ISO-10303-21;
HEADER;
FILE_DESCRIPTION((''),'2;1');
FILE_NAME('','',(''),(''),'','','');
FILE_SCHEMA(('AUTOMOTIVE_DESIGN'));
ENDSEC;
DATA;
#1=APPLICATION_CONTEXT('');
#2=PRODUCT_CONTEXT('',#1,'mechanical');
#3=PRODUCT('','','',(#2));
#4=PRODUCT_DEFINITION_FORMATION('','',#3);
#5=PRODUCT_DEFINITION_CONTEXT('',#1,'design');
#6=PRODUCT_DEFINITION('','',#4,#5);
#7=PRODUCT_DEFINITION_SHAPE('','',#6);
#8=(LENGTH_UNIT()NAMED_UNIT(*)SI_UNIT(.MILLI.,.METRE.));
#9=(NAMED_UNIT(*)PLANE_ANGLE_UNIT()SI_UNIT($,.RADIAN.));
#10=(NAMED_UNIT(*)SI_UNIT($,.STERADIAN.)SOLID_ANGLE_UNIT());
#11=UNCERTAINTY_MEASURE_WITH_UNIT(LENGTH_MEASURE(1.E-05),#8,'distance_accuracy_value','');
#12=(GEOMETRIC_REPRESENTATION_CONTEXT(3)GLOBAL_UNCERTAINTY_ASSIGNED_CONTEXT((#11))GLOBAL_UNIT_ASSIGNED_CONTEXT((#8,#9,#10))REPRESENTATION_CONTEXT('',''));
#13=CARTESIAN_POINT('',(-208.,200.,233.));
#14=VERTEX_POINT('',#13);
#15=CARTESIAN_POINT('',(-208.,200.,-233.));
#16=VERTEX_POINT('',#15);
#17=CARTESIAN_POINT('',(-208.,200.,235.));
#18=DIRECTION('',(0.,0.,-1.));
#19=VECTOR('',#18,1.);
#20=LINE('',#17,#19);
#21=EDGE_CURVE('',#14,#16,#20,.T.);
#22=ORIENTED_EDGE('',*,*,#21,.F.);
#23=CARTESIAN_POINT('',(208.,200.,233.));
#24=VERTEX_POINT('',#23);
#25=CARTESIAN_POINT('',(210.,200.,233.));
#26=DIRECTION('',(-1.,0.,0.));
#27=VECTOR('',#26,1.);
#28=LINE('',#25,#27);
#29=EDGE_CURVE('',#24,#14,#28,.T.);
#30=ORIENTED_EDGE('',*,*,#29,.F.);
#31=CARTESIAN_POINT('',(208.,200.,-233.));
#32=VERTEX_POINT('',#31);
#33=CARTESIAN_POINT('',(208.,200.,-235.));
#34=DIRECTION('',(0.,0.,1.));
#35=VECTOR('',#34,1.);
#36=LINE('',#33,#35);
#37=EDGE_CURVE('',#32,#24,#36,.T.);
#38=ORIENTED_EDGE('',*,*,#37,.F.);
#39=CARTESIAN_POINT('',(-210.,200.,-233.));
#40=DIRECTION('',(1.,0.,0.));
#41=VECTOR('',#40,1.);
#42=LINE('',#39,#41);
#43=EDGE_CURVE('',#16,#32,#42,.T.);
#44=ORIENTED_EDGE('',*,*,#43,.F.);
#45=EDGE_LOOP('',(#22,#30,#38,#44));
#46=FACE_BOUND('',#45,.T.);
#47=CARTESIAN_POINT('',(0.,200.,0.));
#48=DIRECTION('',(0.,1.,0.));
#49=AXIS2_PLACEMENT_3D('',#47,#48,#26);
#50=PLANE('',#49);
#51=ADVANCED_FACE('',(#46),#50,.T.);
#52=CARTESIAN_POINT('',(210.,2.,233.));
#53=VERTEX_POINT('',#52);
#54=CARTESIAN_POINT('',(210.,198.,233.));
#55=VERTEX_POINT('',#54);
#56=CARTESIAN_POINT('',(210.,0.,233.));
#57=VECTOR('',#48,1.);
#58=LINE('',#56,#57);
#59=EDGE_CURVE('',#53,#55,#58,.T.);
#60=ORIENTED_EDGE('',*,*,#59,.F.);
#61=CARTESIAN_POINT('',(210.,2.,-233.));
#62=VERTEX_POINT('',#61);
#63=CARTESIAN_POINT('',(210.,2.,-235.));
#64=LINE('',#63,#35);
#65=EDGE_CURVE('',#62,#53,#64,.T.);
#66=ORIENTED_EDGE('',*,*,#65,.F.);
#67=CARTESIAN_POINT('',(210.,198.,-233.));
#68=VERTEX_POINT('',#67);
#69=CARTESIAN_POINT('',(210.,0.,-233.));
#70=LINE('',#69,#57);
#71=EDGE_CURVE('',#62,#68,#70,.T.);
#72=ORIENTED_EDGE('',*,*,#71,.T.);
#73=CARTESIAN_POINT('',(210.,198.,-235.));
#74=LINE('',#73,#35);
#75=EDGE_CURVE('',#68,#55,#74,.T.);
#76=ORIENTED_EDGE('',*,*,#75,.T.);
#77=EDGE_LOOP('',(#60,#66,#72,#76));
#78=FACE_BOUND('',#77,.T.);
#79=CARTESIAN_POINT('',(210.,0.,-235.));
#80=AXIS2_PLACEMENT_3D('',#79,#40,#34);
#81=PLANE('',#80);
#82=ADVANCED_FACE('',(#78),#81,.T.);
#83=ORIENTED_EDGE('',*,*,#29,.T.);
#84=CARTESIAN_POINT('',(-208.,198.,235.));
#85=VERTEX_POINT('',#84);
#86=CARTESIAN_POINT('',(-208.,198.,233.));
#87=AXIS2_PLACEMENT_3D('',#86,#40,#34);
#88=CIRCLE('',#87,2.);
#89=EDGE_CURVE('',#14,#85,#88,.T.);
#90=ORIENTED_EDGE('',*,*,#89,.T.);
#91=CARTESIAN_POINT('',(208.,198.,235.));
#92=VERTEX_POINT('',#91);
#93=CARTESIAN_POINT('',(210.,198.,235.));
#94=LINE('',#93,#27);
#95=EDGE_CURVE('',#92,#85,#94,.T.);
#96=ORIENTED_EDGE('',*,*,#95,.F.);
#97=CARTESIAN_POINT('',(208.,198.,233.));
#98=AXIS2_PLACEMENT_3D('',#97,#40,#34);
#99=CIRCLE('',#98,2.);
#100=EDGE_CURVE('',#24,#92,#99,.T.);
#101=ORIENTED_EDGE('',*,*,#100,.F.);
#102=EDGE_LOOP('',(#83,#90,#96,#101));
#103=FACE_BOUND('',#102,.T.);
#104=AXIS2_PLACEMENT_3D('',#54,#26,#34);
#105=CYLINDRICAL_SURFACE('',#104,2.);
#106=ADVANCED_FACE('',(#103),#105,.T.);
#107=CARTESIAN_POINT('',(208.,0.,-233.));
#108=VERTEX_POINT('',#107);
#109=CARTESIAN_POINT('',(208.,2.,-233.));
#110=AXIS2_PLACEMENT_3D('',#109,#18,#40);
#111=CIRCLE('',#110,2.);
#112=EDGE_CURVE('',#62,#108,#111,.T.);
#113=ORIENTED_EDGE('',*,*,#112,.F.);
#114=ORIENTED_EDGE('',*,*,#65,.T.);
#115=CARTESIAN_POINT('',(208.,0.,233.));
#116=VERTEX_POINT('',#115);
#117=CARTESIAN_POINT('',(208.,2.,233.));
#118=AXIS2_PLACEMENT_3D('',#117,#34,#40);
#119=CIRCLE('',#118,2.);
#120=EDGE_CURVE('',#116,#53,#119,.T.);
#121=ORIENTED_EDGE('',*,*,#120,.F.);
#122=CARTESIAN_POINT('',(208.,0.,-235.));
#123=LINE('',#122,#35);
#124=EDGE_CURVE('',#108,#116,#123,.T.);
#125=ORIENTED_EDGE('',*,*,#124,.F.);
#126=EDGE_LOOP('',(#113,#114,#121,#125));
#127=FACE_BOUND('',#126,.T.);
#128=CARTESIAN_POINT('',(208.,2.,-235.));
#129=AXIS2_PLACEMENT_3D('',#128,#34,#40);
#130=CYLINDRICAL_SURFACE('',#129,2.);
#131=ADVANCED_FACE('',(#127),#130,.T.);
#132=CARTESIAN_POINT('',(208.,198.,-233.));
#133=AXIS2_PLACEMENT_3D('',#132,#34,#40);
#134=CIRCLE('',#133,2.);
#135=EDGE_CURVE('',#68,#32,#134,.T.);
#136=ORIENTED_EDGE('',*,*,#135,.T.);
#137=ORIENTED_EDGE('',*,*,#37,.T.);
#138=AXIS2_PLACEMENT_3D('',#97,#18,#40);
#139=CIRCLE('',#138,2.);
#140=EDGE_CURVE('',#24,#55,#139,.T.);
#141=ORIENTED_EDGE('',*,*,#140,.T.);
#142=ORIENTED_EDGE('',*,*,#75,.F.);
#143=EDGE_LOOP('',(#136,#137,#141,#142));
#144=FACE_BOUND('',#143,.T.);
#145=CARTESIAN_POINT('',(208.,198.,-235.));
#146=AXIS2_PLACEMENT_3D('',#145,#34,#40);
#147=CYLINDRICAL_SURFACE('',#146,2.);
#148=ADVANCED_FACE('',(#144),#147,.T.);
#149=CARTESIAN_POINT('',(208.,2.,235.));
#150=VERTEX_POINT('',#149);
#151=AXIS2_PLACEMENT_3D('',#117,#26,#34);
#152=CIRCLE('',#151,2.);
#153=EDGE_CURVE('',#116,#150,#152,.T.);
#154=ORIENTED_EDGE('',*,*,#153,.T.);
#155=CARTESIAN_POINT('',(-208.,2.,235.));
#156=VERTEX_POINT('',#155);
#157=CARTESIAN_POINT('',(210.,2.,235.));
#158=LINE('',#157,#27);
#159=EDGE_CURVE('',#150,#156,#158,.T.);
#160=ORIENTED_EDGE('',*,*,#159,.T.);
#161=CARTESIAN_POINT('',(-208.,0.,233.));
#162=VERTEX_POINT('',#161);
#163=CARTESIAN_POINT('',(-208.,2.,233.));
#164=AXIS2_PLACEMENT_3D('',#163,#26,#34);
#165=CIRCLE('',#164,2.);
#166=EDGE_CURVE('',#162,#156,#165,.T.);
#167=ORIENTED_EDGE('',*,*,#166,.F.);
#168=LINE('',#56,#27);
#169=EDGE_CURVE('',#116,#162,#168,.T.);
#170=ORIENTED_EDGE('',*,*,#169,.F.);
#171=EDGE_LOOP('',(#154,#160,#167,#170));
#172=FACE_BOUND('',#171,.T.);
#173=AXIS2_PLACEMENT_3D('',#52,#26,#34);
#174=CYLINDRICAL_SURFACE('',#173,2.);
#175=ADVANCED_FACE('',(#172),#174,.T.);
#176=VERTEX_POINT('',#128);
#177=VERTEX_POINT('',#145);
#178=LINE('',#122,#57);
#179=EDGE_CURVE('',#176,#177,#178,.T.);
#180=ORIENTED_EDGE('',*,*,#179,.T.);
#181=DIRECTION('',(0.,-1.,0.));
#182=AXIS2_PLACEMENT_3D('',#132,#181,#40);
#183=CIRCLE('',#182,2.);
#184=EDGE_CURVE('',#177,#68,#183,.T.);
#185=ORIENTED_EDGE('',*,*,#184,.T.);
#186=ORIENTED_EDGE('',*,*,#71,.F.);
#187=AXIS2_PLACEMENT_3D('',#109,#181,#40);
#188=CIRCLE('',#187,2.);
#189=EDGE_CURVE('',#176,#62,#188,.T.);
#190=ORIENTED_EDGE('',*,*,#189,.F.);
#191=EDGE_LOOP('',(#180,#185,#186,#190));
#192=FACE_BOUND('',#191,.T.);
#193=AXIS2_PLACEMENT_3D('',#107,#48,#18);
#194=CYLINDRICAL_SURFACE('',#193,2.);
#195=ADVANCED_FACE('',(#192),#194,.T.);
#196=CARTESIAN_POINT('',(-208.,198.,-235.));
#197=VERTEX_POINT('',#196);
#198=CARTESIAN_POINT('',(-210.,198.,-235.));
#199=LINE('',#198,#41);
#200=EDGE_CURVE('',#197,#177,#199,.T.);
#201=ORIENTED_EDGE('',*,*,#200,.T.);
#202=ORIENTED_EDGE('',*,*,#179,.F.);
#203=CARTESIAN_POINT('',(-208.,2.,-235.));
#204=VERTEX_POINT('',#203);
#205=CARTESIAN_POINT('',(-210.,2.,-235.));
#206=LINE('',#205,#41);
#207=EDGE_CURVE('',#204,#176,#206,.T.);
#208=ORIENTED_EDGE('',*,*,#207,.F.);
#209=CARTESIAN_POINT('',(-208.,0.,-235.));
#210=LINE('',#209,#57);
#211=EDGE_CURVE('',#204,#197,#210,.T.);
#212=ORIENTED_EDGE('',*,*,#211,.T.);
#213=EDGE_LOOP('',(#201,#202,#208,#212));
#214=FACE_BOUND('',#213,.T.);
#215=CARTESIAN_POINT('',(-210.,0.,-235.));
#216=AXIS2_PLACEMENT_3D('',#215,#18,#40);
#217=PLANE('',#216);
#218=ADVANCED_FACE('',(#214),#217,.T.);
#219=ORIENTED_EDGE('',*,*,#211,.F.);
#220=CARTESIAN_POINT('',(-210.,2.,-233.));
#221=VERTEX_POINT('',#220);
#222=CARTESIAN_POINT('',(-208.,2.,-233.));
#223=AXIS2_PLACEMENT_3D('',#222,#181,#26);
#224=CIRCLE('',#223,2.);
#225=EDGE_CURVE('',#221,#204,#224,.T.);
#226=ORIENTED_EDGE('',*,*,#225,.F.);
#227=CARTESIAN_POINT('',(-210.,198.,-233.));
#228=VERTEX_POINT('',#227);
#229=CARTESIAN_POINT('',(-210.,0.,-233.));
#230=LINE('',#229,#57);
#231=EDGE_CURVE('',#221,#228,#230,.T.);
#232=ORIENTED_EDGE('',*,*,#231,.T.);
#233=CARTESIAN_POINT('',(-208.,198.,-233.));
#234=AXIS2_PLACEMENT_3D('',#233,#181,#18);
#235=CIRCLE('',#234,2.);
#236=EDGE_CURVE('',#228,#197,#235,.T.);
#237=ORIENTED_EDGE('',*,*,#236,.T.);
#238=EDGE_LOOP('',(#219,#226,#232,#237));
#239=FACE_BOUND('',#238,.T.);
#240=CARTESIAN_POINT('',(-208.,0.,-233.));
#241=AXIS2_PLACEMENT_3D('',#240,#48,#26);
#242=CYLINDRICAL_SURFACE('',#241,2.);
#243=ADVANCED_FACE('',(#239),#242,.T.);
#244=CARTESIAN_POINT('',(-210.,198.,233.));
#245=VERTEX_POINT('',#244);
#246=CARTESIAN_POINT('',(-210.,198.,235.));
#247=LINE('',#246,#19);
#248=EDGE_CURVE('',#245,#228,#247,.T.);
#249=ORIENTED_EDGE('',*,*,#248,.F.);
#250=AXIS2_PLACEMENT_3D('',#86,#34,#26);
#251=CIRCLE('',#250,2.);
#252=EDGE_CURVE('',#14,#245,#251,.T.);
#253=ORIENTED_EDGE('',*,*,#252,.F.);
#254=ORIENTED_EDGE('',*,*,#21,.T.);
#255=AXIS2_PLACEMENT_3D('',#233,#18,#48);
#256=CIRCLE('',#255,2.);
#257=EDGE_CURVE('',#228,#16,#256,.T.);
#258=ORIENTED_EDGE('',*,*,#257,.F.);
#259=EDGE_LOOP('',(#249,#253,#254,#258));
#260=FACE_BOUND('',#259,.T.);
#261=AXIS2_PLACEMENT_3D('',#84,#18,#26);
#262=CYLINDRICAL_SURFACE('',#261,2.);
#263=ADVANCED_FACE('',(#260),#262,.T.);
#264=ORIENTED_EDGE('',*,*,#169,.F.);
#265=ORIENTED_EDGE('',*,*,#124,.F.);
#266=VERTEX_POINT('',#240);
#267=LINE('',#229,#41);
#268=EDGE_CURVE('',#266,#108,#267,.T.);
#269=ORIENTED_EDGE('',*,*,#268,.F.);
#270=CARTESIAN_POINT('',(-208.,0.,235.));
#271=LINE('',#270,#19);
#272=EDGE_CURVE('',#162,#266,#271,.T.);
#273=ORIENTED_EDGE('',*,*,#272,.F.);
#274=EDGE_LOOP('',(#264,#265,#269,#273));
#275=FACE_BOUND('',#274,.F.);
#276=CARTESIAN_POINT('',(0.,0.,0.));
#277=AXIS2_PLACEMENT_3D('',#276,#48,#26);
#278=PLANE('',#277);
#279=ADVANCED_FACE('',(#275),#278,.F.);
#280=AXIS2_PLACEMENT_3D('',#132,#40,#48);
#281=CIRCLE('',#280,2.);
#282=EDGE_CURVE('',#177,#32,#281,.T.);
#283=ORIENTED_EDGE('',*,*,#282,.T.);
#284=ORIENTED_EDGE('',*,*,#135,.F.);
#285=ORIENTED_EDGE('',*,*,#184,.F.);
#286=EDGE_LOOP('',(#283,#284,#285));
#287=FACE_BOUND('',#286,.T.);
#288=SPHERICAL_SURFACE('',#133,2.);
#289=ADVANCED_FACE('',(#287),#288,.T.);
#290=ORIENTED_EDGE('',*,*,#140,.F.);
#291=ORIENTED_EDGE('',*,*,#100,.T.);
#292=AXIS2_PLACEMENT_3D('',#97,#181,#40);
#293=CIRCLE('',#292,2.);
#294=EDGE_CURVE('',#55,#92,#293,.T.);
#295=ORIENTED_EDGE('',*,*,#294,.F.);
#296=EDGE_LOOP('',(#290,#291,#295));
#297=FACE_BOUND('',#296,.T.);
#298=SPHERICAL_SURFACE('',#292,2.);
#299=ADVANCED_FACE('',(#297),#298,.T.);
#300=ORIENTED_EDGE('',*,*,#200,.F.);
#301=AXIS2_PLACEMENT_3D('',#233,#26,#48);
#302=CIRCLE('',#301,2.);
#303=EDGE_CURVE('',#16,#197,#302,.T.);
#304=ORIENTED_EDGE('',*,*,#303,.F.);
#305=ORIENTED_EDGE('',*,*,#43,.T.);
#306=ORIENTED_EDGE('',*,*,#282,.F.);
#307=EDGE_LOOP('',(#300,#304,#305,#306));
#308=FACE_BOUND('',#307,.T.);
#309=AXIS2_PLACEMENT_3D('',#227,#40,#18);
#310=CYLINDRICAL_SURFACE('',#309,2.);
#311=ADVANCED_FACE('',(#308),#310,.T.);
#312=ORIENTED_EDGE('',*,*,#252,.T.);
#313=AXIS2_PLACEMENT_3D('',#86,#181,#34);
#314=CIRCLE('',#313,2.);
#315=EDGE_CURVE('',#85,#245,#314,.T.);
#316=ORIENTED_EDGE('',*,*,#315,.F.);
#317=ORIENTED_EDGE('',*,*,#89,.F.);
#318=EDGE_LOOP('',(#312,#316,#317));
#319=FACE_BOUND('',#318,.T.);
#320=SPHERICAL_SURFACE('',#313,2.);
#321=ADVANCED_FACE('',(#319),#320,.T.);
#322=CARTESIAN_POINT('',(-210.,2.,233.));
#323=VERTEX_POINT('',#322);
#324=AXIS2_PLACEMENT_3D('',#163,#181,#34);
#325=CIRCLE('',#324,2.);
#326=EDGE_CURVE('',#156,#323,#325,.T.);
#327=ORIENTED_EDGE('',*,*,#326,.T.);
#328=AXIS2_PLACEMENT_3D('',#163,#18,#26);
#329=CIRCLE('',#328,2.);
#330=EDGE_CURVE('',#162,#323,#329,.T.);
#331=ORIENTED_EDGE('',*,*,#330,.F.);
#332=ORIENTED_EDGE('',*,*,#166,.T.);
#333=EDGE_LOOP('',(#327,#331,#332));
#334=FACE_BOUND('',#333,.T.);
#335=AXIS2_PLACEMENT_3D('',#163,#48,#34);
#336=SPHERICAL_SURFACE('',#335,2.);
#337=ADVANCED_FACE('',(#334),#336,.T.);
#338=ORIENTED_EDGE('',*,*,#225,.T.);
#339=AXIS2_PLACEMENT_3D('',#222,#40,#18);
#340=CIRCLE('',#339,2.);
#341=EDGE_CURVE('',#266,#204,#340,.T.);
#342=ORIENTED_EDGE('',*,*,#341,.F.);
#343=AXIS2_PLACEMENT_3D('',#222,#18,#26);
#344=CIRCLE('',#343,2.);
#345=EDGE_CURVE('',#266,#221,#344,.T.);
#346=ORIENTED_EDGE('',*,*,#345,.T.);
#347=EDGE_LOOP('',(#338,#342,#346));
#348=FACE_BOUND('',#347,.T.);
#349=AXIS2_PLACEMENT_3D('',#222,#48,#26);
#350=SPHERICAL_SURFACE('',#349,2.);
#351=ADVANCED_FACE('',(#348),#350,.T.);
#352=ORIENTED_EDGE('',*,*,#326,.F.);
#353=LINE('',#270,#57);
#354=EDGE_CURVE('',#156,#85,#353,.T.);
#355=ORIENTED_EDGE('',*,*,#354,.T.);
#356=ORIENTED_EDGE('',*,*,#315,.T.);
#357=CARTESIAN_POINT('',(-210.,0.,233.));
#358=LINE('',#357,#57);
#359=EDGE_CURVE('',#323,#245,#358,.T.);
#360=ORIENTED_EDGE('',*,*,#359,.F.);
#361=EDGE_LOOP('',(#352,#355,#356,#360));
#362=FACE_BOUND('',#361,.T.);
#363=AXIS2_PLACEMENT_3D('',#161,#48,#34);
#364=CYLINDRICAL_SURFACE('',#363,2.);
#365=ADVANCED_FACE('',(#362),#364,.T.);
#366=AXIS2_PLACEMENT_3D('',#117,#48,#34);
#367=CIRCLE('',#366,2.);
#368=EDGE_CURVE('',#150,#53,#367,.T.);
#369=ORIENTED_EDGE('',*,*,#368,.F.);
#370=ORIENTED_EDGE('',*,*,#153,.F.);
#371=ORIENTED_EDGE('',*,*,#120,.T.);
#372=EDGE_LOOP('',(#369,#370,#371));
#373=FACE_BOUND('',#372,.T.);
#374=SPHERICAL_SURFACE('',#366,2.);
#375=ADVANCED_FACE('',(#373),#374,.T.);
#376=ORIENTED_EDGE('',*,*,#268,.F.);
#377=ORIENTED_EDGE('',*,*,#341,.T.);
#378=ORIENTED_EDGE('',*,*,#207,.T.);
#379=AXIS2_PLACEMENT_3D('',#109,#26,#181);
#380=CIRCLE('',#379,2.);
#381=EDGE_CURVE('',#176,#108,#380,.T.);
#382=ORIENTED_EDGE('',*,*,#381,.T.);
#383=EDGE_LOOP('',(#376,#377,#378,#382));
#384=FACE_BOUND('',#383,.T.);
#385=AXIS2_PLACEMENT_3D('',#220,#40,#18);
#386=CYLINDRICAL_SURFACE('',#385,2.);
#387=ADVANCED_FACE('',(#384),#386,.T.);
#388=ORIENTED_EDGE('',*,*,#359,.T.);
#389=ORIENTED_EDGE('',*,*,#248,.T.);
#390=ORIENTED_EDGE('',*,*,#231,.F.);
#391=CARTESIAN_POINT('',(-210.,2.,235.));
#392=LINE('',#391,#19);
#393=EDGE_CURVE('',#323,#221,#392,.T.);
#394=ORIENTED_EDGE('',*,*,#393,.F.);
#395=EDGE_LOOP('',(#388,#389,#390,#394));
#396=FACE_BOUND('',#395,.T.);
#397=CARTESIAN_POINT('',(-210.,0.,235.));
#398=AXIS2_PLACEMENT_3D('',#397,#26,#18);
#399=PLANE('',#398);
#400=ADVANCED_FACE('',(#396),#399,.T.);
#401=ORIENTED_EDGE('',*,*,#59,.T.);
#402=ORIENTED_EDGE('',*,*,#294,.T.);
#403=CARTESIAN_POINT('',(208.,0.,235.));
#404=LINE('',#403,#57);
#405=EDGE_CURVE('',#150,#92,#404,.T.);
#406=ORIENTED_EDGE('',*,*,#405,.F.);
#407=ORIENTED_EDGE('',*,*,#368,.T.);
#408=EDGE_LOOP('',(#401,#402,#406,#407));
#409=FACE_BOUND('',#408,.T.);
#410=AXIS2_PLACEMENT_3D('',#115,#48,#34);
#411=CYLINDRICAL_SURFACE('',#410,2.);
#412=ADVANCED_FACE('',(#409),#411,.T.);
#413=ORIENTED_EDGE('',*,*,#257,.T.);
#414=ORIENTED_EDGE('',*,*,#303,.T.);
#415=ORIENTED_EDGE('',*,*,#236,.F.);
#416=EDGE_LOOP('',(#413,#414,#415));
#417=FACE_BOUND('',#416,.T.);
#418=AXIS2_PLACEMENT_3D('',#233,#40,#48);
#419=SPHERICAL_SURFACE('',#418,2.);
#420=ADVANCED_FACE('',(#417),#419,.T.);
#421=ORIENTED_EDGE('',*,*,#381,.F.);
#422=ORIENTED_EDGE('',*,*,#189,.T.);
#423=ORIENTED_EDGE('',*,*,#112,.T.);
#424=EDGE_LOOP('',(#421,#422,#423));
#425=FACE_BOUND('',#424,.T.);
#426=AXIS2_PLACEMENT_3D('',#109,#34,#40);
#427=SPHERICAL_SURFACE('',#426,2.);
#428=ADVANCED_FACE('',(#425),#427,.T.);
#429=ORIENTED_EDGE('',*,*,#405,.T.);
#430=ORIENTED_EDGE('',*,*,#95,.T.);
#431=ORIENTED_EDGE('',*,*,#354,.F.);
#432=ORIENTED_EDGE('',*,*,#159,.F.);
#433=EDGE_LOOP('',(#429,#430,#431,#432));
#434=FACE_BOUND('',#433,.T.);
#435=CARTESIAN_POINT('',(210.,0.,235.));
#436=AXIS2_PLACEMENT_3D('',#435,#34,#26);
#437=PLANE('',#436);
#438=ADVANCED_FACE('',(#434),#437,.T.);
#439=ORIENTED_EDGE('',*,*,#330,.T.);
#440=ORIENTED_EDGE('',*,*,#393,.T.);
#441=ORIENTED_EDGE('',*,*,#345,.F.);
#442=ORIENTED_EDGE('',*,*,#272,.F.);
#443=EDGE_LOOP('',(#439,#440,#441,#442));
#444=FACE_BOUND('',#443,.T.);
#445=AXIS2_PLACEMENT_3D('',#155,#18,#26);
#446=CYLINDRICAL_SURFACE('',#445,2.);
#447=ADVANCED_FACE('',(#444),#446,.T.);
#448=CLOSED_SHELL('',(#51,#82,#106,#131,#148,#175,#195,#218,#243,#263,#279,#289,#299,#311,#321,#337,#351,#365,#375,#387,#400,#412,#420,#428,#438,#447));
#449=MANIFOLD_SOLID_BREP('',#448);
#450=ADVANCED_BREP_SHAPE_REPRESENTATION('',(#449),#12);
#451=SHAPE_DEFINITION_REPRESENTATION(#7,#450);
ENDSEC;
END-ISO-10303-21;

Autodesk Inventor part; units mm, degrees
ref_plane "YZ Plane" through (0, 0, 0) normal (1, 0, 0) x (0, 1, 0)
ref_plane "XZ Plane" through (0, 0, 0) normal (0, 1, 0) x (-1, 0, 0)
ref_plane "XY Plane" through (0, 0, 0) normal (0, 0, 1) x (1, 0, 0)
sketch "スケッチ1" plane through (0, 0, 0) normal (0, 1, 0) x (-1, 0, 0)
  line L0 (-210, 235) -> (210, 235)
  line L1 (210, 235) -> (210, -235)
  line L2 (210, -235) -> (-210, -235)
  line L3 (-210, -235) -> (-210, 235)
  line L4 (-210, 235) -> (210, -235) construction
  line L5 (210, 235) -> (-210, -235) construction
  point P0 (0, 0)
  dimension "d0" = 420
  dimension "d1" = 470
extrude "押し出し1" add sketch "スケッチ1" along normal blind 200
fillet "フィレット1" radius 2 12 edges at (-210, 100, 235) (210, 100, 235) (210, 200, 0) (0, 200, 235) (0, 0, 235) (210, 0, 0) (210, 100, -235) (0, 200, -235) (-210, 200, 0) (-210, 100, -235) (-210, 0, 0) (0, 0, -235)
properties part number "controller" material "ABS プラスチック"
